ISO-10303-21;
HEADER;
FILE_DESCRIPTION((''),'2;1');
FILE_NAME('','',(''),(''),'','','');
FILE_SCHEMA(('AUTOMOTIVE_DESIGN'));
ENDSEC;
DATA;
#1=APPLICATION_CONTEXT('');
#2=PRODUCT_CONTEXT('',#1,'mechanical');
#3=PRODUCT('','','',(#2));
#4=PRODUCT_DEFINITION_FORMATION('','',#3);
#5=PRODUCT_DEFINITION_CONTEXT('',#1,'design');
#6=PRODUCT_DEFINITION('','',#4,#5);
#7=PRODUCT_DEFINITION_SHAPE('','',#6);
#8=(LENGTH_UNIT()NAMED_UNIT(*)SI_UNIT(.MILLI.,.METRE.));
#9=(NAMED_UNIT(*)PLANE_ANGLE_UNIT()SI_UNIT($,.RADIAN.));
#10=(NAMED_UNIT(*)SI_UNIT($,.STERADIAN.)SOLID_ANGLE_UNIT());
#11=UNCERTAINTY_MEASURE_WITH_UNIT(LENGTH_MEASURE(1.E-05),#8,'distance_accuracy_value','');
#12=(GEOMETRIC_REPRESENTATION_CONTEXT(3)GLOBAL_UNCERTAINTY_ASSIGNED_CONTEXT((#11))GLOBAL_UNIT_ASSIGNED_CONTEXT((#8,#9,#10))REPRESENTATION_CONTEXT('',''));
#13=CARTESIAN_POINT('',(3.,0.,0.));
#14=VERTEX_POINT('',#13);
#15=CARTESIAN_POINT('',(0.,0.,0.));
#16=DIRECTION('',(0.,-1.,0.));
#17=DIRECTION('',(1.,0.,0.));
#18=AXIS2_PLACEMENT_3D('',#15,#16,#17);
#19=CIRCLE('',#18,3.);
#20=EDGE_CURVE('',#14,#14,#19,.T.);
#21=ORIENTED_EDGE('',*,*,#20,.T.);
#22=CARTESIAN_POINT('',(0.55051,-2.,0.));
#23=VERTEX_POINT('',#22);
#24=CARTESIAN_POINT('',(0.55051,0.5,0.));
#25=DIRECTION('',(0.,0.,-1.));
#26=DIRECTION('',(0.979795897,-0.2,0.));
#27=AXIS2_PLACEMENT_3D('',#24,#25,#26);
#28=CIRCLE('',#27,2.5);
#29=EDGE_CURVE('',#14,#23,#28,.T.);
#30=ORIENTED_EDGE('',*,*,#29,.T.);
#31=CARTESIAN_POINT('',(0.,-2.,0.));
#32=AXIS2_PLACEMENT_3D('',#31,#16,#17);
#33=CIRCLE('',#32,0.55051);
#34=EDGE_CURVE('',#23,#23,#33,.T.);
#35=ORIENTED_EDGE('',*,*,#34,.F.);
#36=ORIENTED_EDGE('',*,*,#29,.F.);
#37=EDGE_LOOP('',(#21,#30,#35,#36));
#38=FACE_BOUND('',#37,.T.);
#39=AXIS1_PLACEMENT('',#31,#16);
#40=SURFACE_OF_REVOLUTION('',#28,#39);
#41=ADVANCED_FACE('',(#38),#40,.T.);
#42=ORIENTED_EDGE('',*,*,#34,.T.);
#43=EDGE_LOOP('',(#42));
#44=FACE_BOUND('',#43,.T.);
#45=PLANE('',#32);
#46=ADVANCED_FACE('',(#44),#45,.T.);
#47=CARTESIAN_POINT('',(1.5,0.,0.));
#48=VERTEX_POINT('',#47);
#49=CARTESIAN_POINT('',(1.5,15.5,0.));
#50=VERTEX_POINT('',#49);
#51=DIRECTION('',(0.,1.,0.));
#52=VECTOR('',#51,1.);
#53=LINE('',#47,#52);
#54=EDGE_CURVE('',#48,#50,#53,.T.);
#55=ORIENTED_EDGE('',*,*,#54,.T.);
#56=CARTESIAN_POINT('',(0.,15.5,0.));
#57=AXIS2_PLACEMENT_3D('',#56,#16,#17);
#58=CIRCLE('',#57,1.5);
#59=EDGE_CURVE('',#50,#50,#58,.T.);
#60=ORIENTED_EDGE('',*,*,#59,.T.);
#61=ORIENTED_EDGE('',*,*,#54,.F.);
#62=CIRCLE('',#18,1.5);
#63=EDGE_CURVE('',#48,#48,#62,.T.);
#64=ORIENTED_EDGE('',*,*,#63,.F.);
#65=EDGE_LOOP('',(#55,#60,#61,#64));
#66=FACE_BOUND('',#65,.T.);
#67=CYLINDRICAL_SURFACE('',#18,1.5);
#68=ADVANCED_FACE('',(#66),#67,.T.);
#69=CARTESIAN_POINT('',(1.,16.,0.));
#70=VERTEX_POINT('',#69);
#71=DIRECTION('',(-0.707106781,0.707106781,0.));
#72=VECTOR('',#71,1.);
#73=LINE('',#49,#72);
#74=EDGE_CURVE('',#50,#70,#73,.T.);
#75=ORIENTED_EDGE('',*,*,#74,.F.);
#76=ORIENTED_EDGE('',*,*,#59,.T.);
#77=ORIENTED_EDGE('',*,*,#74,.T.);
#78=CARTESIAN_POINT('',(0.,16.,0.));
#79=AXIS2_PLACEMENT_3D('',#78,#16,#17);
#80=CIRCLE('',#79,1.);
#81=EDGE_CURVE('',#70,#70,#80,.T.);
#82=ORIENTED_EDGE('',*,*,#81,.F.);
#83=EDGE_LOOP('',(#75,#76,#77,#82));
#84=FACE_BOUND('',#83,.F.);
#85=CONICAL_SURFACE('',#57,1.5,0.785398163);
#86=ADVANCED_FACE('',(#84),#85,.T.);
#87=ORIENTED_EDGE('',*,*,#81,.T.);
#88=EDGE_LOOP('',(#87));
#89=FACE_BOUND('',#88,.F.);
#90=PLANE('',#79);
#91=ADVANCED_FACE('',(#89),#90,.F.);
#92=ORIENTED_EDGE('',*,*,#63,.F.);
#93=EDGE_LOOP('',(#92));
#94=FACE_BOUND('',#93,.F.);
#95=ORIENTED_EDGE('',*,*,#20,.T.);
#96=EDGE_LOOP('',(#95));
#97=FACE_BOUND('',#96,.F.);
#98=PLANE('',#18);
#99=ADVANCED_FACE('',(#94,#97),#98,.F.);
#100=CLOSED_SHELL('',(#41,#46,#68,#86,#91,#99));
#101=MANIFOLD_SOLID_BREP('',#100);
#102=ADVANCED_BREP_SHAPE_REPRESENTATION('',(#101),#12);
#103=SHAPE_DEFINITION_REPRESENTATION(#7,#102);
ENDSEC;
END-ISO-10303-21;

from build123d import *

# Parameters (mm, degrees)
F0_R     = 1.5
F1_DEPTH = 16
F0_R_2   = 3
F2_DEPTH = 2
F4_SIZE  = 0.5


# Not quite as in the source:
# - a fillet or chamfer that OpenCascade refuses, or shapes differently, is made with other operations: its cross-section is extruded or revolved along the edge and cut away or added


with BuildPart() as f1:
    # F0 (on Front) → F1 (new body)
    with BuildSketch(Plane.XZ):
        Circle(F0_R)
    extrude(amount=-F1_DEPTH)

    # F0 (on Front) → F2 (join)
    with BuildSketch(Plane.XZ):
        Circle(F0_R_2)
        Circle(F0_R, mode=Mode.SUBTRACT)
        Circle(F0_R)
    extrude(amount=F2_DEPTH)

    # F3: fillet of radius 2.5 on 1 edges, made by hand

    # F3_s1 → F3_t2 (revolve, cut)
    with BuildSketch(Plane.XY):
        with BuildLine():
            ThreePointArc((3, 0), (2.1316490873, -1.4364916731), (0.5505102572, -2))
            Line((0.5505102572, -2), (3, -2))
            Line((3, -2), (3, 0))
        make_face()
    revolve(axis=Axis((0, -2, 0), (0, -1, 0)), mode=Mode.SUBTRACT)

    # F4
    f4_edges = [f1.edges().sort_by_distance(p)[0] for p in [
        (-1.5, 16, 0),
    ]]
    chamfer(f4_edges, length=F4_SIZE)


solid = f1.part
